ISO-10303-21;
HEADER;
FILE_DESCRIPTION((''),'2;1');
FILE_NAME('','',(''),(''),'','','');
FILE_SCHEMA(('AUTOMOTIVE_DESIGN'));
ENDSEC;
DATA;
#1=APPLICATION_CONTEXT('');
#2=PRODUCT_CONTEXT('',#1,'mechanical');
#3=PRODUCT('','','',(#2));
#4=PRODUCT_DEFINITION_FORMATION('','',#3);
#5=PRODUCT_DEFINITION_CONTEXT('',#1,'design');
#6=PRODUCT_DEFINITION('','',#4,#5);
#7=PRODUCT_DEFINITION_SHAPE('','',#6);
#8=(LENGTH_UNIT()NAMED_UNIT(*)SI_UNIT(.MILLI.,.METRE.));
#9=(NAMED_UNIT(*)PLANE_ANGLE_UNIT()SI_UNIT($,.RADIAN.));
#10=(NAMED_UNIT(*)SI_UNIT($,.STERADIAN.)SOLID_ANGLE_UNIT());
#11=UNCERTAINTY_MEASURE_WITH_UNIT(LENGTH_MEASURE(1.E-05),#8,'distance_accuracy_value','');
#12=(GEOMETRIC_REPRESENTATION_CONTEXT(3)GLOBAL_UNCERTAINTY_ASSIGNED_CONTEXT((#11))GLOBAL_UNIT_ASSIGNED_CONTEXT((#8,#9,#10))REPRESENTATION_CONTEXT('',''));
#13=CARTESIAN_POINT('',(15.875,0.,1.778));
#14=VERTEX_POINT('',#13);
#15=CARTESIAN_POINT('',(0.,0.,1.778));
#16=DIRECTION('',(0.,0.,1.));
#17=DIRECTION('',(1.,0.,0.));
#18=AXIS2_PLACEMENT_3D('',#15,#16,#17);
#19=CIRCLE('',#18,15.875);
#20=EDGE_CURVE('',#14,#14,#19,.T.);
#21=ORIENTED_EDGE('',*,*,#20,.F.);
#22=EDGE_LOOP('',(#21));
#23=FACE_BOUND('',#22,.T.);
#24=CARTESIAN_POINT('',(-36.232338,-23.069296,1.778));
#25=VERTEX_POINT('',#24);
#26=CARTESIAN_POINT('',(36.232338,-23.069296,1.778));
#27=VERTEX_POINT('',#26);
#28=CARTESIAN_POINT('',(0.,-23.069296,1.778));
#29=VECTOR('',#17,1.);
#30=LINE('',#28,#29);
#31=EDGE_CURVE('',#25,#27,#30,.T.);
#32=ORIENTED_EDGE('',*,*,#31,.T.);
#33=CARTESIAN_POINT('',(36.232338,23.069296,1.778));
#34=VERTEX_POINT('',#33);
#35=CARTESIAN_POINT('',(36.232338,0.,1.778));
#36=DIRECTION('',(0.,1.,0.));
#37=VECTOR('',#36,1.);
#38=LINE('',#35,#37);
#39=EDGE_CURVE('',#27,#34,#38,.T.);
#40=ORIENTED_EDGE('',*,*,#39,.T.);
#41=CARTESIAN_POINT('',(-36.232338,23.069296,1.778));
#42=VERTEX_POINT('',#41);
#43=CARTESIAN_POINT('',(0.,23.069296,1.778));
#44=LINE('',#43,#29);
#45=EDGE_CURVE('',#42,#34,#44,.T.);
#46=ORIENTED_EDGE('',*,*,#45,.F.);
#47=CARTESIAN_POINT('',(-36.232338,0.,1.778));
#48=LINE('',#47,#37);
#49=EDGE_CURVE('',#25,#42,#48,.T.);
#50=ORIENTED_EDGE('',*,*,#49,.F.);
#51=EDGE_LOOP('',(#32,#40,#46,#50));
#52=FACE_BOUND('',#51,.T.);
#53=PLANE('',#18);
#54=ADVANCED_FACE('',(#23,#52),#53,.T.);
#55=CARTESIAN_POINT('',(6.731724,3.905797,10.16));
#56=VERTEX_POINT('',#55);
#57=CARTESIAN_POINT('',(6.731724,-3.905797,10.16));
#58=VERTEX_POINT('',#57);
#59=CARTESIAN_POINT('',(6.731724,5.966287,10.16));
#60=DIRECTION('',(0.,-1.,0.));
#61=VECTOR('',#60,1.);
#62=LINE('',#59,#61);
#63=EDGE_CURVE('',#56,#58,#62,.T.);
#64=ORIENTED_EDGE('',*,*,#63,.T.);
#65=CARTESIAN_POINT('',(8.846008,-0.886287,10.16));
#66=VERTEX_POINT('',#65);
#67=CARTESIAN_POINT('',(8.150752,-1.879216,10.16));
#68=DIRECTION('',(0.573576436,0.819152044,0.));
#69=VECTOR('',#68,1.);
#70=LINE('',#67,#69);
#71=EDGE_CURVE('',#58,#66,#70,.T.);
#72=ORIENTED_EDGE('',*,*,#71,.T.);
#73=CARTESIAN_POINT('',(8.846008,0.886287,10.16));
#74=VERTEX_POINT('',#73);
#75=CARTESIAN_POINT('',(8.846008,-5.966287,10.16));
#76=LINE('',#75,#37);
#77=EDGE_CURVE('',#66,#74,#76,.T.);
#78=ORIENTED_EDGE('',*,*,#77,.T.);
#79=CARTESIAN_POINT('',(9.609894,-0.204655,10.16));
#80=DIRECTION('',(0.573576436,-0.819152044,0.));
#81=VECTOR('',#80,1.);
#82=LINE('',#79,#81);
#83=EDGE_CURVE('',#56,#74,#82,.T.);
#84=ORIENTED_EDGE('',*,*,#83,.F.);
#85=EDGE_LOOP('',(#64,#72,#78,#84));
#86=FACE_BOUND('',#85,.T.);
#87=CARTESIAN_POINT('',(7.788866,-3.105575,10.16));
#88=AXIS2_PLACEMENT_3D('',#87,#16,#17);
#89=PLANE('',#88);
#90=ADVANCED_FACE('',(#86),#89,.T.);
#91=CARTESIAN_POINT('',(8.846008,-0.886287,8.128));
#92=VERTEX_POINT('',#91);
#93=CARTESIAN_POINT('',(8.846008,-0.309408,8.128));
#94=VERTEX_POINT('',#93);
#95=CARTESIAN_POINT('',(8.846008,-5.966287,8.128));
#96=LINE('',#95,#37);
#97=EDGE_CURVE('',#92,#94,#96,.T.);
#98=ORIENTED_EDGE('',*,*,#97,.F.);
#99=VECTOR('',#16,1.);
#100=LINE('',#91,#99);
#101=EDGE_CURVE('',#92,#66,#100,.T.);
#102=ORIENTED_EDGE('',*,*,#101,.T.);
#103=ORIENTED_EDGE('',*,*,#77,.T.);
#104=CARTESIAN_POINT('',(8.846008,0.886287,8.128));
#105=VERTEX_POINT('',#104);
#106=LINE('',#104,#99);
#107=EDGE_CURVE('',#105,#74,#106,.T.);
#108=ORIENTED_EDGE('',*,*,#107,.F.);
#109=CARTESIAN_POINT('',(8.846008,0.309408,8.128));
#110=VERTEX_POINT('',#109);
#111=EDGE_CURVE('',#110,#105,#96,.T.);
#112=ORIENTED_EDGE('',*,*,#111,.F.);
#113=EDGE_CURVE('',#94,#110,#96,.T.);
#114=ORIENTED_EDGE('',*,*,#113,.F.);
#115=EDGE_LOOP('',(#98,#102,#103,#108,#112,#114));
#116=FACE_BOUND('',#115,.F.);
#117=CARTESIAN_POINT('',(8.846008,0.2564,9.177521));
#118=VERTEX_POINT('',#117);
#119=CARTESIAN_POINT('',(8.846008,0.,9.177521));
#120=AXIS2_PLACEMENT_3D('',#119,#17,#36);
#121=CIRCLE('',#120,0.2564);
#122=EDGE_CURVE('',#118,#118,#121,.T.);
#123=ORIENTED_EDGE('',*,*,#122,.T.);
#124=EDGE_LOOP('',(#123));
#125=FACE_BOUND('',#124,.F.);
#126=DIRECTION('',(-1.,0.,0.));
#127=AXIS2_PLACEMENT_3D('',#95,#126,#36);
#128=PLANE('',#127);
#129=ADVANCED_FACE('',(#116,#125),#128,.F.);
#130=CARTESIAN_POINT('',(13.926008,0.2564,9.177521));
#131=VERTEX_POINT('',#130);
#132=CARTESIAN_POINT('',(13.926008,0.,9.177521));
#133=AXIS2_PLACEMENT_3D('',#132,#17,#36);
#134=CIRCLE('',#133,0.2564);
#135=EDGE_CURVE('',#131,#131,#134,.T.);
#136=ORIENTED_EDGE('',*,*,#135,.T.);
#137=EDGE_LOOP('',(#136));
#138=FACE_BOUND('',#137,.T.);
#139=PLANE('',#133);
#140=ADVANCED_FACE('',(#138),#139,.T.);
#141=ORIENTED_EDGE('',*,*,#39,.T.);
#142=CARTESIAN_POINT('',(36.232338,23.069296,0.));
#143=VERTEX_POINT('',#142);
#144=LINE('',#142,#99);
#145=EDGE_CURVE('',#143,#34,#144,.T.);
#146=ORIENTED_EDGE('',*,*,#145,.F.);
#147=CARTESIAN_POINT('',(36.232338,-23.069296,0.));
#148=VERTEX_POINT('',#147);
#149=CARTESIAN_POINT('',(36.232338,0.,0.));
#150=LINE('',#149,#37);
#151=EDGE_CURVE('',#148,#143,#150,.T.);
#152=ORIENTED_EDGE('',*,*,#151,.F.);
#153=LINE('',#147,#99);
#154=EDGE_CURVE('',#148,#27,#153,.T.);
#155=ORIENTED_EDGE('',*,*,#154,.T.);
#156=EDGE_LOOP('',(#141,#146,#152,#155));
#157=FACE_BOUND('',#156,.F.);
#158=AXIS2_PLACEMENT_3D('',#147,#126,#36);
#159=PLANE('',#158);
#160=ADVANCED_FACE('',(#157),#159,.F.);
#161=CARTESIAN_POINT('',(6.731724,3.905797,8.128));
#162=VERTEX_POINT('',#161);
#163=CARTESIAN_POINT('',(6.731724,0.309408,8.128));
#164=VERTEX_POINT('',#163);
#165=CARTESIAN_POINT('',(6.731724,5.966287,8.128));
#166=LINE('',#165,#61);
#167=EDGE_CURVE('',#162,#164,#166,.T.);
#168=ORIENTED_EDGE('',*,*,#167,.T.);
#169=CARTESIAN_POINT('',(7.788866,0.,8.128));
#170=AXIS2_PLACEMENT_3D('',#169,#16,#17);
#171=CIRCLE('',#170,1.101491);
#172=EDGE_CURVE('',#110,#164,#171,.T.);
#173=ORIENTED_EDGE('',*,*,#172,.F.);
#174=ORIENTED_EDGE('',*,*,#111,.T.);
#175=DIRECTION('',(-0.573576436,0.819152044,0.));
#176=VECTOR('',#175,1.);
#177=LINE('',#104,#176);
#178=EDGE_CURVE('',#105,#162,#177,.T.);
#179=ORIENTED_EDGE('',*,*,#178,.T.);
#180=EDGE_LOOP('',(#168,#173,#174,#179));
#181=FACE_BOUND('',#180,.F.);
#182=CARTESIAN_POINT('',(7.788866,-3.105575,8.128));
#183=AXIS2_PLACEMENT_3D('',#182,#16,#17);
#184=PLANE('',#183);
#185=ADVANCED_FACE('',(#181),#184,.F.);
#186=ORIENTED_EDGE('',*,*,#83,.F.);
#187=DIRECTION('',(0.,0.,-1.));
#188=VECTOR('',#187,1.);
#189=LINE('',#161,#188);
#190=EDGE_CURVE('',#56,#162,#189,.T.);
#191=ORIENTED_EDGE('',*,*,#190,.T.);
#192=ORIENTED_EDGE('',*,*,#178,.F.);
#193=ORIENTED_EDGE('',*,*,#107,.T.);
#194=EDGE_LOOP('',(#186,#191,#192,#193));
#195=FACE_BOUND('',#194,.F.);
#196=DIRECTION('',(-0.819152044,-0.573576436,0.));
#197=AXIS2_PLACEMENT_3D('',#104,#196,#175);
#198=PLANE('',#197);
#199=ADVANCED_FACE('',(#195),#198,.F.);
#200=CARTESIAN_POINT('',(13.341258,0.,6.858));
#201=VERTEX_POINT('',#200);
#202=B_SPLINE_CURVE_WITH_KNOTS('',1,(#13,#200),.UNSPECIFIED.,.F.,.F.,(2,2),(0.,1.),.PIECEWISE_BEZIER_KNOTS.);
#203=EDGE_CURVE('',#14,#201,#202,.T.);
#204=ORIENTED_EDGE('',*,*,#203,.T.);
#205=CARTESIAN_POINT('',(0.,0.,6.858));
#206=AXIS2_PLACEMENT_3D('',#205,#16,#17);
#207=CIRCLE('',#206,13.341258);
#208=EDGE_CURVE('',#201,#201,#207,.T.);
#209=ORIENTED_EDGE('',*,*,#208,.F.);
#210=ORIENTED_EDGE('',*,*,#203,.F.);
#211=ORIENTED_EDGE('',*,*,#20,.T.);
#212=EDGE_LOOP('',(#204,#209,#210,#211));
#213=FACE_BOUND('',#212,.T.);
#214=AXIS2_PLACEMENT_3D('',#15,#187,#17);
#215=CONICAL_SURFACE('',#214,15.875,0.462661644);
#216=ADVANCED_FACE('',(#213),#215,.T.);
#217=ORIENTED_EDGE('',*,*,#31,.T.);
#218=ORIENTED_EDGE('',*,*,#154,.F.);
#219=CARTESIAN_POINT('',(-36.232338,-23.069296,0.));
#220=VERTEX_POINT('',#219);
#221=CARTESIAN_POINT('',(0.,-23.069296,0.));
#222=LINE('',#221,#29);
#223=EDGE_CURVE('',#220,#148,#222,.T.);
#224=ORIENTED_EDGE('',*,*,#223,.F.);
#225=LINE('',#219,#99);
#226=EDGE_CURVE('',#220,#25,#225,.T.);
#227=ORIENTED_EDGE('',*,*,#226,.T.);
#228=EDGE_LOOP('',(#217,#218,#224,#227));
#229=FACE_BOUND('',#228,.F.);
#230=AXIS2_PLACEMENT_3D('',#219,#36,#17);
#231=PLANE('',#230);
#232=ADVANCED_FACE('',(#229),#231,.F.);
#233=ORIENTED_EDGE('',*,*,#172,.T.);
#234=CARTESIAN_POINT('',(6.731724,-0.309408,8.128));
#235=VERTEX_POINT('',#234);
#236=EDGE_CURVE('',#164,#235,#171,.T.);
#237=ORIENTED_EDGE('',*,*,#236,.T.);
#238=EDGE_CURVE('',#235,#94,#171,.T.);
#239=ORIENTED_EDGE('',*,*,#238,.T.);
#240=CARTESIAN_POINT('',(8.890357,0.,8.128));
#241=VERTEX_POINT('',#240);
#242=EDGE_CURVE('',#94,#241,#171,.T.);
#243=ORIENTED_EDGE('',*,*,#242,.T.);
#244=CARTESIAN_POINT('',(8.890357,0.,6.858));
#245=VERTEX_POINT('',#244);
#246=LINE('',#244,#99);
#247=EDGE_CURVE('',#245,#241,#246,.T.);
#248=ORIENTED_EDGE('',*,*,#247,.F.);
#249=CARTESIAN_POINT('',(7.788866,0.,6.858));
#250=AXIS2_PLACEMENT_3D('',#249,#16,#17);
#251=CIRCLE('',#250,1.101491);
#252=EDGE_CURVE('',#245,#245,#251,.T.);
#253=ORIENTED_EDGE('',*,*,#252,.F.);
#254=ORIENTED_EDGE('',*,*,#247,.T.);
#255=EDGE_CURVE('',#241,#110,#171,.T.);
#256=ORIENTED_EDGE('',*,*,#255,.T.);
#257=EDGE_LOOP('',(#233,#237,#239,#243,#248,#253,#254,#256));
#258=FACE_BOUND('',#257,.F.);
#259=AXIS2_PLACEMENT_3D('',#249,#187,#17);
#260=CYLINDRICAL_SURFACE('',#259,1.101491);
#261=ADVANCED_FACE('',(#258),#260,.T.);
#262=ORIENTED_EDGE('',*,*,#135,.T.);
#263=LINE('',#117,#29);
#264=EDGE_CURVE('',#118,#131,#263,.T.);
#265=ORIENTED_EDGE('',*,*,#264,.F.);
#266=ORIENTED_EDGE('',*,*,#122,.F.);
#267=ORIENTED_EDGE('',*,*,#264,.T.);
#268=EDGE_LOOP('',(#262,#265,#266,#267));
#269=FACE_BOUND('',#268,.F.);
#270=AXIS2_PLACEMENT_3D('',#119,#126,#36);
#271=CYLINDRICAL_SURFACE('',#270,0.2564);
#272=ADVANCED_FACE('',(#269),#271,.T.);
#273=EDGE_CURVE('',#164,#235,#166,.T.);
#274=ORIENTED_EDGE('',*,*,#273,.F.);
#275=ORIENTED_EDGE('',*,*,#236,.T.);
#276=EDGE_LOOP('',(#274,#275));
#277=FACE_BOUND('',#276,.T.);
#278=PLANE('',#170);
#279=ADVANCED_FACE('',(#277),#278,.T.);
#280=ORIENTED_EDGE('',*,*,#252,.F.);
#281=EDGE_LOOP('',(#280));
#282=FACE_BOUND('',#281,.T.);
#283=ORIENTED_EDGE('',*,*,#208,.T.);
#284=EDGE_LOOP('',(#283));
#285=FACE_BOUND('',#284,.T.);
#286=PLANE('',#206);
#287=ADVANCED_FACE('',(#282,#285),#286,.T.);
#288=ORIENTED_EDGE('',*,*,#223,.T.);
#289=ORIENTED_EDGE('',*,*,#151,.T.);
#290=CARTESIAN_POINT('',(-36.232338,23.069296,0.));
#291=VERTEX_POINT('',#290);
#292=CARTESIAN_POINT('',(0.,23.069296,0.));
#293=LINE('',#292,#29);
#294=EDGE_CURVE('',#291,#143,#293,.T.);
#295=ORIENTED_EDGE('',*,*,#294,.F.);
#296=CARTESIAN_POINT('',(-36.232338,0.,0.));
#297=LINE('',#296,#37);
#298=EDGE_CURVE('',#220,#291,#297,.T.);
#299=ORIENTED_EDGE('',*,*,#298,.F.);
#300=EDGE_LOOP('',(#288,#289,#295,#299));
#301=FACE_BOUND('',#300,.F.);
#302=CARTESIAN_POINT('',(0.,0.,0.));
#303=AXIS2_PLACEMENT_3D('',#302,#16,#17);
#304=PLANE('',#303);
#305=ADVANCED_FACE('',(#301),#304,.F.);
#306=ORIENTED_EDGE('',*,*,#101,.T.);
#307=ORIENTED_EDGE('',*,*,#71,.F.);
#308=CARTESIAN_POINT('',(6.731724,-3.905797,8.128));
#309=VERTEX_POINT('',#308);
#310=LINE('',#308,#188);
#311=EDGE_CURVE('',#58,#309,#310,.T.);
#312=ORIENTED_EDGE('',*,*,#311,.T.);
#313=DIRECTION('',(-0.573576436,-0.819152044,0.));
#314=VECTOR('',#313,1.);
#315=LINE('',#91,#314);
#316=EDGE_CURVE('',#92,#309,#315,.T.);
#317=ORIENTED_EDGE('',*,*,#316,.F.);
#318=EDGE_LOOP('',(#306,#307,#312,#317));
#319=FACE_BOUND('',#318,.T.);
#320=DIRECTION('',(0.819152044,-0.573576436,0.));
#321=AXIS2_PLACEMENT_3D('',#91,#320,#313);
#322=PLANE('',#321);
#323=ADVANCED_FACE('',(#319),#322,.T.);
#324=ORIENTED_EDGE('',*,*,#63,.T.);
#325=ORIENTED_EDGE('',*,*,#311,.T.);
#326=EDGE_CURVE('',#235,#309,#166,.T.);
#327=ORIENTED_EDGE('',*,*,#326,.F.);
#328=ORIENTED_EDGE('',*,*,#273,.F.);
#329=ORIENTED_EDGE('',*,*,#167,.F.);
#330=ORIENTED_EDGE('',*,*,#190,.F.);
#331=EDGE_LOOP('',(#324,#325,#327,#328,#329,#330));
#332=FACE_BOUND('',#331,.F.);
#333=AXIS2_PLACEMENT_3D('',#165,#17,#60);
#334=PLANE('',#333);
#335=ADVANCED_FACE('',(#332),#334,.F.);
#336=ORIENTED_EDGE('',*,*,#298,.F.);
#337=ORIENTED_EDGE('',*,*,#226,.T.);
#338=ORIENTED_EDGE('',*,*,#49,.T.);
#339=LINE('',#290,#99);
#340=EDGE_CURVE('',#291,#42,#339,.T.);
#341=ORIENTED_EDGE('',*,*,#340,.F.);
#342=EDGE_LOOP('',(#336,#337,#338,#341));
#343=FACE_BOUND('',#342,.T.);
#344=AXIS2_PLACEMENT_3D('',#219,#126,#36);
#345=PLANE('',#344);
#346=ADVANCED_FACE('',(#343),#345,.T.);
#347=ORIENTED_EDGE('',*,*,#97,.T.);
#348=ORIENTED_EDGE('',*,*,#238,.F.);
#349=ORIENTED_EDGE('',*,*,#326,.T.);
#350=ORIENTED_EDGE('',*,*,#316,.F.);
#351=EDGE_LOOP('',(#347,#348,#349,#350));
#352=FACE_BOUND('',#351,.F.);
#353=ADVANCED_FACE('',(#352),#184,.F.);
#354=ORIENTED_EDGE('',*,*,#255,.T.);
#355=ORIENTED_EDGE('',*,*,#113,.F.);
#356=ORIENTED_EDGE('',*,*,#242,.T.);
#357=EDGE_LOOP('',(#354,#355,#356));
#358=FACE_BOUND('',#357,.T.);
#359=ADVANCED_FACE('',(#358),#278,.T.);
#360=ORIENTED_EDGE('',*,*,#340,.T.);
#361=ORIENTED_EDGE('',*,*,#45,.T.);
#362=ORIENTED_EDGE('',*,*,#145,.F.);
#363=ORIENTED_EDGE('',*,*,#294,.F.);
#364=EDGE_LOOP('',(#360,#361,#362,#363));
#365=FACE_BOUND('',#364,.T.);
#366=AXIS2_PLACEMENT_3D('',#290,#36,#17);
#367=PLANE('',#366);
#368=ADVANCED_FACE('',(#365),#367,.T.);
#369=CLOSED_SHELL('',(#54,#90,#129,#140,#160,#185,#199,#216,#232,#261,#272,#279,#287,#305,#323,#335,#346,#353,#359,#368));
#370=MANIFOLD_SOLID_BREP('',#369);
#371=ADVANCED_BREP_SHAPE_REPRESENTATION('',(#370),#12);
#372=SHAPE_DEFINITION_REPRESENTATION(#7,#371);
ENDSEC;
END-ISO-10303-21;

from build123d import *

# Parameters (mm, degrees)
F0_W         = 72.464676
F0_H         = 46.138592
F1_DEPTH     = 1.778
F2_R         = 15.875
F4_R         = 13.341257797
F6_R         = 1.1014910557
F7_DEPTH     = 1.27
F9_DEPTH     = 2.032
F10_T1_DEPTH = 15.1513653298
F11_R        = 0.2563999908
F12_DEPTH    = 5.08


# Not quite as in the source:
# - a fillet or chamfer that OpenCascade refuses, or shapes differently, is made with other operations: its cross-section is extruded or revolved along the edge and cut away or added


with BuildPart() as f1:
    # F0 (on Top) → F1 (new body)
    with BuildSketch(Plane.XY):
        Rectangle(F0_W, F0_H)
    extrude(amount=F1_DEPTH)

    # F2 (on face) → F5 section 0
    with BuildSketch(Plane.XY.offset(1.778)):
        Circle(F2_R)
    # F4 (on offset) → F5 section 1
    with BuildSketch(Plane.XY.offset(6.858)):
        Circle(F4_R)
    loft()

    # F6 (on face) → F7 (join)
    with BuildSketch(Plane.XY.offset(6.858)):
        with Locations((7.7888662927, 0)):
            Circle(F6_R)
    extrude(amount=F7_DEPTH)

    # F8 (on face) → F9 (join)
    with BuildSketch(Plane.XY.offset(8.128)):
        with BuildLine():
            Line((6.7317243665, -0.3094082962), (6.7317243665, -5.9662871063))
            Line((6.7317243665, -5.9662871063), (8.8460082188, -5.9662871063))
            Line((8.8460082188, -5.9662871063), (8.8460082188, -0.3094082962))
            ThreePointArc((8.8460082188, -0.3094082962), (7.7888662927, -1.1014910557), (6.7317243665, -0.3094082962))
        make_face()
        with BuildLine():
            Line((6.7317243665, 5.9662871063), (6.7317243665, 0.3094082962))
            ThreePointArc((6.7317243665, 0.3094082962), (7.7888662927, 1.1014910557), (8.8460082188, 0.3094082962))
            Line((8.8460082188, 0.3094082962), (8.8460082188, 5.9662871063))
            Line((8.8460082188, 5.9662871063), (6.7317243665, 5.9662871063))
        make_face()
        with BuildLine():
            Line((6.7317243665, 0.3094082962), (6.7317243665, -0.3094082962))
            ThreePointArc((6.7317243665, -0.3094082962), (7.7888662927, -1.1014910557), (8.8460082188, -0.3094082962))
            Line((8.8460082188, -0.3094082962), (8.8460082188, 0.3094082962))
            ThreePointArc((8.8460082188, 0.3094082962), (7.7888662927, 1.1014910557), (6.7317243665, 0.3094082962))
        make_face()
    extrude(amount=F9_DEPTH)

    # F10: chamfer of 5.08 x 3.5570542941 on 2 edges, made by hand

    # F10_s2 → F10_t1 (cut)
    with BuildSketch(Plane.XY.offset(8.128)):
        Polygon((8.8460082188, -0.8862871063), (5.2889539247, -5.9662871063), (8.8460082188, -5.9662871063), align=None)
        Polygon((8.8460082188, 0.8862871063), (5.2889539247, 5.9662871063), (8.8460082188, 5.9662871063), align=None)
    extrude(amount=F10_T1_DEPTH, mode=Mode.SUBTRACT)

    # F11 (on face) → F12 (join)
    with BuildSketch(Plane.YZ.offset(8.8460082188)):
        with Locations((0, 9.1775208712)):
            Circle(F11_R)
    extrude(amount=F12_DEPTH)


solid = f1.part
